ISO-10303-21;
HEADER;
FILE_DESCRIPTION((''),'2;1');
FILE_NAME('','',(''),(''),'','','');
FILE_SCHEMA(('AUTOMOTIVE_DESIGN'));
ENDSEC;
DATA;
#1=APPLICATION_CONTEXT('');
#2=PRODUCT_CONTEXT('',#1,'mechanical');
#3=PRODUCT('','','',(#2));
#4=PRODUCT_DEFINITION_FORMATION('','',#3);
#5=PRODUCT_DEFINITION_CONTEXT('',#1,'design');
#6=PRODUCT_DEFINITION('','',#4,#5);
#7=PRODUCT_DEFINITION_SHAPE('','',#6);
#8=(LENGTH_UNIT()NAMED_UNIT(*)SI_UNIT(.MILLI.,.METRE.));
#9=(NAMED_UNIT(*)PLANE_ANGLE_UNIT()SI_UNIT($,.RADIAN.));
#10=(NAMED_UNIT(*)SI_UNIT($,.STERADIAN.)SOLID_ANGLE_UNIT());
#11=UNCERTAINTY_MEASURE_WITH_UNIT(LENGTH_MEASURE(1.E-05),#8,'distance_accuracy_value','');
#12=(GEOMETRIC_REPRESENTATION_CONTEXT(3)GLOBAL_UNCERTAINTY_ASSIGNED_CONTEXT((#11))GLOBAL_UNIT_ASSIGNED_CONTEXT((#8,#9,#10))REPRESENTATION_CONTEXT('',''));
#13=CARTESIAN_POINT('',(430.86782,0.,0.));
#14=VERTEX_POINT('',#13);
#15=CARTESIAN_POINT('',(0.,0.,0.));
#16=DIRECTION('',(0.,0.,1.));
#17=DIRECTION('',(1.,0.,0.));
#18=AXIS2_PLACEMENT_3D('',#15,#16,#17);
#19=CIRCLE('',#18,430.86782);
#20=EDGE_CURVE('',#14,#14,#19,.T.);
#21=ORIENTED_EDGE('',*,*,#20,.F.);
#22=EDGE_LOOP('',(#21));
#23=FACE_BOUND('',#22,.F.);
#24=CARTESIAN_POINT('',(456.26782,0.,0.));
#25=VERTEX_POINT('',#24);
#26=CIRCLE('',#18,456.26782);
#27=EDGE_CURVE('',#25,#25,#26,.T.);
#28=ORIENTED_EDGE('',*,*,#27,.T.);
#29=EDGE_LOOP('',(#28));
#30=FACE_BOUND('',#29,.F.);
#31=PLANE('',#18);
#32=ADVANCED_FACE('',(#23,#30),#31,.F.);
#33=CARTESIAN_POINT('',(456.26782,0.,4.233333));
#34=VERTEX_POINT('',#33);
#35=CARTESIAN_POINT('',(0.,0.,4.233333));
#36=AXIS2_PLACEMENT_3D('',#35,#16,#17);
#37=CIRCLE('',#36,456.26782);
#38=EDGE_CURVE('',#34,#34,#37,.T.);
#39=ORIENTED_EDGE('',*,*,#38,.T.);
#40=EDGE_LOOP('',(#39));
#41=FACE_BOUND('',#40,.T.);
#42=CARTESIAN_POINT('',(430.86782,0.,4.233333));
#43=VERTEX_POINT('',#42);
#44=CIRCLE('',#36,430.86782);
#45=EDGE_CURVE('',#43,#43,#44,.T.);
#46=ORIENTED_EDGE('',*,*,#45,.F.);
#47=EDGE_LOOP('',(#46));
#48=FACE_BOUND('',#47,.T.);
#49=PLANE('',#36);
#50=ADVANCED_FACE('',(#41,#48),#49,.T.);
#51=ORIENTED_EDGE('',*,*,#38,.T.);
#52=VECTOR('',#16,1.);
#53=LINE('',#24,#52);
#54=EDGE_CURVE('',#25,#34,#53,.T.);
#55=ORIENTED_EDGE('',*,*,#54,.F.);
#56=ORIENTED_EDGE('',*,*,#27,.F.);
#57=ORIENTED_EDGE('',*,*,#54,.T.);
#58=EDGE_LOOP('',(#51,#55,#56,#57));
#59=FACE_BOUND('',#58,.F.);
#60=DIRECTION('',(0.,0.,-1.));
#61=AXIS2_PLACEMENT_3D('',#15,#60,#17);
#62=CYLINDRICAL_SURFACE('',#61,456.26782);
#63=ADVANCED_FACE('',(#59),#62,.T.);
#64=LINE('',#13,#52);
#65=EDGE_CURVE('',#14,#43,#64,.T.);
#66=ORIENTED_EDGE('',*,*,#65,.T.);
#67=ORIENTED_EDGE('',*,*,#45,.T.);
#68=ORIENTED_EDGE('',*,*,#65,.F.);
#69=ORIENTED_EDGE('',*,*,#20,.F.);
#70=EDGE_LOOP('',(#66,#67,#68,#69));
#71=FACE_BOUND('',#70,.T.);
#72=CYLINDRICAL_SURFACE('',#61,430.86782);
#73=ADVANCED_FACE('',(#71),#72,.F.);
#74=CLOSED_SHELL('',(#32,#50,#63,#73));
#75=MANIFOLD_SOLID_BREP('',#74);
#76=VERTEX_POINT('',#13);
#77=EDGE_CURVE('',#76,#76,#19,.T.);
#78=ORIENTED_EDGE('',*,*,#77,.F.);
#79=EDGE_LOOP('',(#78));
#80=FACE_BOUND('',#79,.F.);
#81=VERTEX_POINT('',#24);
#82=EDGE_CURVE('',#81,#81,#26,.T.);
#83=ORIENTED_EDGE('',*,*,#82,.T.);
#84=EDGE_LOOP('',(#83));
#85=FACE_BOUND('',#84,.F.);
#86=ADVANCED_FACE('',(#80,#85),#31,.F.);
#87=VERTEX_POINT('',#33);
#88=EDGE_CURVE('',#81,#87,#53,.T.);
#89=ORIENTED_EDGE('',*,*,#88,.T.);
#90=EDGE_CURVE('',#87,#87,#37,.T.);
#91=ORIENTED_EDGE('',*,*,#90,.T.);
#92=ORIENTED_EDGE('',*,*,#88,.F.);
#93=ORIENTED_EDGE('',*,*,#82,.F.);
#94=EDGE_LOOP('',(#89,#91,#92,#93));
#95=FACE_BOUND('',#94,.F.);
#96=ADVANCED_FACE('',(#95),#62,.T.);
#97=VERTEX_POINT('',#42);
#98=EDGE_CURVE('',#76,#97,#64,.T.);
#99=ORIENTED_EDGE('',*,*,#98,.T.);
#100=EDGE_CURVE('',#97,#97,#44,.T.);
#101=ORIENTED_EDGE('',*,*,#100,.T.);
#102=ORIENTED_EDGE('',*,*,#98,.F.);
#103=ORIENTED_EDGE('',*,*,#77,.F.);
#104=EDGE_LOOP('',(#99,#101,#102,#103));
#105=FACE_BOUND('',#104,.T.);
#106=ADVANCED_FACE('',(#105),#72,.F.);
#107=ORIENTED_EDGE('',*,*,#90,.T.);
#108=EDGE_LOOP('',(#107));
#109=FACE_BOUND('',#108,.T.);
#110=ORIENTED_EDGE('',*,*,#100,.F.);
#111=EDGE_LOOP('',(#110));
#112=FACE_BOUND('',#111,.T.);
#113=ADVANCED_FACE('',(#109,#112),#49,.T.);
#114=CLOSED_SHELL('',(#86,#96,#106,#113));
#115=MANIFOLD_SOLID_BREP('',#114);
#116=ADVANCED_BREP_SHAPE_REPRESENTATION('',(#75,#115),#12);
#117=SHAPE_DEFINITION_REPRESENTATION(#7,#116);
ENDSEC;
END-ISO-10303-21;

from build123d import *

# Parameters (mm, degrees)
F0_R     = 456.26782
F0_R_2   = 430.86782
F1_DEPTH = 4.2333333333
F2_DEPTH = 4.2333333333


# Not quite as in the source:
# - a length typed as a fraction of an inch, garbled in the dataset ("3 / 203.2 mm" for 3/8 in), is restored


with BuildPart() as f1:
    # F0 (on Top) → F1 (new body)
    with BuildSketch(Plane.XY):
        Circle(F0_R)
        Circle(F0_R_2, mode=Mode.SUBTRACT)
    extrude(amount=F1_DEPTH)


with BuildPart() as f2:
    # F0 (on Top) → F2 (new body)
    with BuildSketch(Plane.XY):
        Circle(F0_R)
        Circle(F0_R_2, mode=Mode.SUBTRACT)
    extrude(amount=F2_DEPTH)


solid = Compound([f1.part, f2.part])
